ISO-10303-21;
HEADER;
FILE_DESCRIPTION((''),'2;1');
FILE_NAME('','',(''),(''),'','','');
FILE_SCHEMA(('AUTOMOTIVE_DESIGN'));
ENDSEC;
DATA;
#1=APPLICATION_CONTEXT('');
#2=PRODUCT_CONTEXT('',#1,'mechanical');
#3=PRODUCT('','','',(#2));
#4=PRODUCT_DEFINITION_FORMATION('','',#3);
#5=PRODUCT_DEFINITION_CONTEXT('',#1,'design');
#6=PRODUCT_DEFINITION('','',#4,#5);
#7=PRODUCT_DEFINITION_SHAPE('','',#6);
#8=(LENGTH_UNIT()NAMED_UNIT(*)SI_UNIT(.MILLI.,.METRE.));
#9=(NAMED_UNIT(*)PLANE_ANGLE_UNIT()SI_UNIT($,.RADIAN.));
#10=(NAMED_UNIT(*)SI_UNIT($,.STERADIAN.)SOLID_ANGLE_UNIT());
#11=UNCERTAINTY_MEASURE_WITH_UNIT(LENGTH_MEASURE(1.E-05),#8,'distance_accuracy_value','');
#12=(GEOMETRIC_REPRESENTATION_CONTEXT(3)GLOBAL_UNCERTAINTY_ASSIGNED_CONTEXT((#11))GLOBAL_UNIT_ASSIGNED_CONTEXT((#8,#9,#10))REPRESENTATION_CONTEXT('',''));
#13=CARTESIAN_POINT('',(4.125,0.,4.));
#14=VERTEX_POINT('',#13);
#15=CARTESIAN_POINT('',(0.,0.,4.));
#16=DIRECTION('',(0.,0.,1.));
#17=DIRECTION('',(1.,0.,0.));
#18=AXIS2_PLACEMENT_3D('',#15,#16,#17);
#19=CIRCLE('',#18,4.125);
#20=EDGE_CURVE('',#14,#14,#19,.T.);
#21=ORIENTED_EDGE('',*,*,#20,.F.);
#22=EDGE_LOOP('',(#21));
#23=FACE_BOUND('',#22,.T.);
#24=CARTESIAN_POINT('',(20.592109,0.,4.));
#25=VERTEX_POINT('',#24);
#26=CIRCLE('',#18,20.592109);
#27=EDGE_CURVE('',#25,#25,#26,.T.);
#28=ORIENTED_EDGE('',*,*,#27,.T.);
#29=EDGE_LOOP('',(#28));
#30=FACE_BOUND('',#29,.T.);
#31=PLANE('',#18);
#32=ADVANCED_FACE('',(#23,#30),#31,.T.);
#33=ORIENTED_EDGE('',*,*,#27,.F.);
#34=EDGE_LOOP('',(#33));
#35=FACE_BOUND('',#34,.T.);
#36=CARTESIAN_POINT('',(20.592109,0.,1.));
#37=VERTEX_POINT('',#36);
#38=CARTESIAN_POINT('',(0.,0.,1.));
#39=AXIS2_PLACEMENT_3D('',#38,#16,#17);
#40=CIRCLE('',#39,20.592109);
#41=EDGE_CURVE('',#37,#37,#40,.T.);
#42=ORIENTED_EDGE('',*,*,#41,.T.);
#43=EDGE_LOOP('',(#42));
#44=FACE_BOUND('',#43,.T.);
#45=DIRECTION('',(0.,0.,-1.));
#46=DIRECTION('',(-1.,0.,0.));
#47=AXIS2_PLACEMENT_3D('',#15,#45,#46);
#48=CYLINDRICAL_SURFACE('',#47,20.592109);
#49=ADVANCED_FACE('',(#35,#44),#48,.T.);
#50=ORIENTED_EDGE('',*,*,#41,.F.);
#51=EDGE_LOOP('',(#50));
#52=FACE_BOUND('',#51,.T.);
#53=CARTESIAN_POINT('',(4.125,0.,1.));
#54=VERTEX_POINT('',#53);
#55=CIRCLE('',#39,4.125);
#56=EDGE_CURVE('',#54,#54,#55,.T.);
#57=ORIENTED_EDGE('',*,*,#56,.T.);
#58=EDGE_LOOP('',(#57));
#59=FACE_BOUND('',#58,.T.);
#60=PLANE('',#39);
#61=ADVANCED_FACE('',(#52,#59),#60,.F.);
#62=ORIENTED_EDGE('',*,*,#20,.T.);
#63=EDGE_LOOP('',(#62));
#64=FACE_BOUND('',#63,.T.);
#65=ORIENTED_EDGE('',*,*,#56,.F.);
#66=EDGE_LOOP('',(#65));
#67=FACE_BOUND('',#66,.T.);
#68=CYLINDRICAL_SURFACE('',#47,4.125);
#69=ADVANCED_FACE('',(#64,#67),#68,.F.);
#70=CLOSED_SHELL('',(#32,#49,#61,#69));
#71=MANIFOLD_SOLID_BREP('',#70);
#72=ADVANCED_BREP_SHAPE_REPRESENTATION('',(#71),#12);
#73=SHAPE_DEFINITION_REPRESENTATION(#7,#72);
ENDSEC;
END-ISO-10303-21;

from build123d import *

# Parameters (mm, degrees)
SKETCH2_R           = 20.592109163
SKETCH2_R_2         = 4.125
BOSS_EXTRUDE1_DEPTH = 3


# Read off the part's stored shape, not the designer's step: Gear 60pitch part02.STEP
with BuildPart() as part:
    # Sketch2 → Boss-Extrude1 (new body)
    with BuildSketch(Plane.XY.offset(1)):
        Circle(SKETCH2_R)
        Circle(SKETCH2_R_2, mode=Mode.SUBTRACT)
    extrude(amount=BOSS_EXTRUDE1_DEPTH)


solid = part.part
